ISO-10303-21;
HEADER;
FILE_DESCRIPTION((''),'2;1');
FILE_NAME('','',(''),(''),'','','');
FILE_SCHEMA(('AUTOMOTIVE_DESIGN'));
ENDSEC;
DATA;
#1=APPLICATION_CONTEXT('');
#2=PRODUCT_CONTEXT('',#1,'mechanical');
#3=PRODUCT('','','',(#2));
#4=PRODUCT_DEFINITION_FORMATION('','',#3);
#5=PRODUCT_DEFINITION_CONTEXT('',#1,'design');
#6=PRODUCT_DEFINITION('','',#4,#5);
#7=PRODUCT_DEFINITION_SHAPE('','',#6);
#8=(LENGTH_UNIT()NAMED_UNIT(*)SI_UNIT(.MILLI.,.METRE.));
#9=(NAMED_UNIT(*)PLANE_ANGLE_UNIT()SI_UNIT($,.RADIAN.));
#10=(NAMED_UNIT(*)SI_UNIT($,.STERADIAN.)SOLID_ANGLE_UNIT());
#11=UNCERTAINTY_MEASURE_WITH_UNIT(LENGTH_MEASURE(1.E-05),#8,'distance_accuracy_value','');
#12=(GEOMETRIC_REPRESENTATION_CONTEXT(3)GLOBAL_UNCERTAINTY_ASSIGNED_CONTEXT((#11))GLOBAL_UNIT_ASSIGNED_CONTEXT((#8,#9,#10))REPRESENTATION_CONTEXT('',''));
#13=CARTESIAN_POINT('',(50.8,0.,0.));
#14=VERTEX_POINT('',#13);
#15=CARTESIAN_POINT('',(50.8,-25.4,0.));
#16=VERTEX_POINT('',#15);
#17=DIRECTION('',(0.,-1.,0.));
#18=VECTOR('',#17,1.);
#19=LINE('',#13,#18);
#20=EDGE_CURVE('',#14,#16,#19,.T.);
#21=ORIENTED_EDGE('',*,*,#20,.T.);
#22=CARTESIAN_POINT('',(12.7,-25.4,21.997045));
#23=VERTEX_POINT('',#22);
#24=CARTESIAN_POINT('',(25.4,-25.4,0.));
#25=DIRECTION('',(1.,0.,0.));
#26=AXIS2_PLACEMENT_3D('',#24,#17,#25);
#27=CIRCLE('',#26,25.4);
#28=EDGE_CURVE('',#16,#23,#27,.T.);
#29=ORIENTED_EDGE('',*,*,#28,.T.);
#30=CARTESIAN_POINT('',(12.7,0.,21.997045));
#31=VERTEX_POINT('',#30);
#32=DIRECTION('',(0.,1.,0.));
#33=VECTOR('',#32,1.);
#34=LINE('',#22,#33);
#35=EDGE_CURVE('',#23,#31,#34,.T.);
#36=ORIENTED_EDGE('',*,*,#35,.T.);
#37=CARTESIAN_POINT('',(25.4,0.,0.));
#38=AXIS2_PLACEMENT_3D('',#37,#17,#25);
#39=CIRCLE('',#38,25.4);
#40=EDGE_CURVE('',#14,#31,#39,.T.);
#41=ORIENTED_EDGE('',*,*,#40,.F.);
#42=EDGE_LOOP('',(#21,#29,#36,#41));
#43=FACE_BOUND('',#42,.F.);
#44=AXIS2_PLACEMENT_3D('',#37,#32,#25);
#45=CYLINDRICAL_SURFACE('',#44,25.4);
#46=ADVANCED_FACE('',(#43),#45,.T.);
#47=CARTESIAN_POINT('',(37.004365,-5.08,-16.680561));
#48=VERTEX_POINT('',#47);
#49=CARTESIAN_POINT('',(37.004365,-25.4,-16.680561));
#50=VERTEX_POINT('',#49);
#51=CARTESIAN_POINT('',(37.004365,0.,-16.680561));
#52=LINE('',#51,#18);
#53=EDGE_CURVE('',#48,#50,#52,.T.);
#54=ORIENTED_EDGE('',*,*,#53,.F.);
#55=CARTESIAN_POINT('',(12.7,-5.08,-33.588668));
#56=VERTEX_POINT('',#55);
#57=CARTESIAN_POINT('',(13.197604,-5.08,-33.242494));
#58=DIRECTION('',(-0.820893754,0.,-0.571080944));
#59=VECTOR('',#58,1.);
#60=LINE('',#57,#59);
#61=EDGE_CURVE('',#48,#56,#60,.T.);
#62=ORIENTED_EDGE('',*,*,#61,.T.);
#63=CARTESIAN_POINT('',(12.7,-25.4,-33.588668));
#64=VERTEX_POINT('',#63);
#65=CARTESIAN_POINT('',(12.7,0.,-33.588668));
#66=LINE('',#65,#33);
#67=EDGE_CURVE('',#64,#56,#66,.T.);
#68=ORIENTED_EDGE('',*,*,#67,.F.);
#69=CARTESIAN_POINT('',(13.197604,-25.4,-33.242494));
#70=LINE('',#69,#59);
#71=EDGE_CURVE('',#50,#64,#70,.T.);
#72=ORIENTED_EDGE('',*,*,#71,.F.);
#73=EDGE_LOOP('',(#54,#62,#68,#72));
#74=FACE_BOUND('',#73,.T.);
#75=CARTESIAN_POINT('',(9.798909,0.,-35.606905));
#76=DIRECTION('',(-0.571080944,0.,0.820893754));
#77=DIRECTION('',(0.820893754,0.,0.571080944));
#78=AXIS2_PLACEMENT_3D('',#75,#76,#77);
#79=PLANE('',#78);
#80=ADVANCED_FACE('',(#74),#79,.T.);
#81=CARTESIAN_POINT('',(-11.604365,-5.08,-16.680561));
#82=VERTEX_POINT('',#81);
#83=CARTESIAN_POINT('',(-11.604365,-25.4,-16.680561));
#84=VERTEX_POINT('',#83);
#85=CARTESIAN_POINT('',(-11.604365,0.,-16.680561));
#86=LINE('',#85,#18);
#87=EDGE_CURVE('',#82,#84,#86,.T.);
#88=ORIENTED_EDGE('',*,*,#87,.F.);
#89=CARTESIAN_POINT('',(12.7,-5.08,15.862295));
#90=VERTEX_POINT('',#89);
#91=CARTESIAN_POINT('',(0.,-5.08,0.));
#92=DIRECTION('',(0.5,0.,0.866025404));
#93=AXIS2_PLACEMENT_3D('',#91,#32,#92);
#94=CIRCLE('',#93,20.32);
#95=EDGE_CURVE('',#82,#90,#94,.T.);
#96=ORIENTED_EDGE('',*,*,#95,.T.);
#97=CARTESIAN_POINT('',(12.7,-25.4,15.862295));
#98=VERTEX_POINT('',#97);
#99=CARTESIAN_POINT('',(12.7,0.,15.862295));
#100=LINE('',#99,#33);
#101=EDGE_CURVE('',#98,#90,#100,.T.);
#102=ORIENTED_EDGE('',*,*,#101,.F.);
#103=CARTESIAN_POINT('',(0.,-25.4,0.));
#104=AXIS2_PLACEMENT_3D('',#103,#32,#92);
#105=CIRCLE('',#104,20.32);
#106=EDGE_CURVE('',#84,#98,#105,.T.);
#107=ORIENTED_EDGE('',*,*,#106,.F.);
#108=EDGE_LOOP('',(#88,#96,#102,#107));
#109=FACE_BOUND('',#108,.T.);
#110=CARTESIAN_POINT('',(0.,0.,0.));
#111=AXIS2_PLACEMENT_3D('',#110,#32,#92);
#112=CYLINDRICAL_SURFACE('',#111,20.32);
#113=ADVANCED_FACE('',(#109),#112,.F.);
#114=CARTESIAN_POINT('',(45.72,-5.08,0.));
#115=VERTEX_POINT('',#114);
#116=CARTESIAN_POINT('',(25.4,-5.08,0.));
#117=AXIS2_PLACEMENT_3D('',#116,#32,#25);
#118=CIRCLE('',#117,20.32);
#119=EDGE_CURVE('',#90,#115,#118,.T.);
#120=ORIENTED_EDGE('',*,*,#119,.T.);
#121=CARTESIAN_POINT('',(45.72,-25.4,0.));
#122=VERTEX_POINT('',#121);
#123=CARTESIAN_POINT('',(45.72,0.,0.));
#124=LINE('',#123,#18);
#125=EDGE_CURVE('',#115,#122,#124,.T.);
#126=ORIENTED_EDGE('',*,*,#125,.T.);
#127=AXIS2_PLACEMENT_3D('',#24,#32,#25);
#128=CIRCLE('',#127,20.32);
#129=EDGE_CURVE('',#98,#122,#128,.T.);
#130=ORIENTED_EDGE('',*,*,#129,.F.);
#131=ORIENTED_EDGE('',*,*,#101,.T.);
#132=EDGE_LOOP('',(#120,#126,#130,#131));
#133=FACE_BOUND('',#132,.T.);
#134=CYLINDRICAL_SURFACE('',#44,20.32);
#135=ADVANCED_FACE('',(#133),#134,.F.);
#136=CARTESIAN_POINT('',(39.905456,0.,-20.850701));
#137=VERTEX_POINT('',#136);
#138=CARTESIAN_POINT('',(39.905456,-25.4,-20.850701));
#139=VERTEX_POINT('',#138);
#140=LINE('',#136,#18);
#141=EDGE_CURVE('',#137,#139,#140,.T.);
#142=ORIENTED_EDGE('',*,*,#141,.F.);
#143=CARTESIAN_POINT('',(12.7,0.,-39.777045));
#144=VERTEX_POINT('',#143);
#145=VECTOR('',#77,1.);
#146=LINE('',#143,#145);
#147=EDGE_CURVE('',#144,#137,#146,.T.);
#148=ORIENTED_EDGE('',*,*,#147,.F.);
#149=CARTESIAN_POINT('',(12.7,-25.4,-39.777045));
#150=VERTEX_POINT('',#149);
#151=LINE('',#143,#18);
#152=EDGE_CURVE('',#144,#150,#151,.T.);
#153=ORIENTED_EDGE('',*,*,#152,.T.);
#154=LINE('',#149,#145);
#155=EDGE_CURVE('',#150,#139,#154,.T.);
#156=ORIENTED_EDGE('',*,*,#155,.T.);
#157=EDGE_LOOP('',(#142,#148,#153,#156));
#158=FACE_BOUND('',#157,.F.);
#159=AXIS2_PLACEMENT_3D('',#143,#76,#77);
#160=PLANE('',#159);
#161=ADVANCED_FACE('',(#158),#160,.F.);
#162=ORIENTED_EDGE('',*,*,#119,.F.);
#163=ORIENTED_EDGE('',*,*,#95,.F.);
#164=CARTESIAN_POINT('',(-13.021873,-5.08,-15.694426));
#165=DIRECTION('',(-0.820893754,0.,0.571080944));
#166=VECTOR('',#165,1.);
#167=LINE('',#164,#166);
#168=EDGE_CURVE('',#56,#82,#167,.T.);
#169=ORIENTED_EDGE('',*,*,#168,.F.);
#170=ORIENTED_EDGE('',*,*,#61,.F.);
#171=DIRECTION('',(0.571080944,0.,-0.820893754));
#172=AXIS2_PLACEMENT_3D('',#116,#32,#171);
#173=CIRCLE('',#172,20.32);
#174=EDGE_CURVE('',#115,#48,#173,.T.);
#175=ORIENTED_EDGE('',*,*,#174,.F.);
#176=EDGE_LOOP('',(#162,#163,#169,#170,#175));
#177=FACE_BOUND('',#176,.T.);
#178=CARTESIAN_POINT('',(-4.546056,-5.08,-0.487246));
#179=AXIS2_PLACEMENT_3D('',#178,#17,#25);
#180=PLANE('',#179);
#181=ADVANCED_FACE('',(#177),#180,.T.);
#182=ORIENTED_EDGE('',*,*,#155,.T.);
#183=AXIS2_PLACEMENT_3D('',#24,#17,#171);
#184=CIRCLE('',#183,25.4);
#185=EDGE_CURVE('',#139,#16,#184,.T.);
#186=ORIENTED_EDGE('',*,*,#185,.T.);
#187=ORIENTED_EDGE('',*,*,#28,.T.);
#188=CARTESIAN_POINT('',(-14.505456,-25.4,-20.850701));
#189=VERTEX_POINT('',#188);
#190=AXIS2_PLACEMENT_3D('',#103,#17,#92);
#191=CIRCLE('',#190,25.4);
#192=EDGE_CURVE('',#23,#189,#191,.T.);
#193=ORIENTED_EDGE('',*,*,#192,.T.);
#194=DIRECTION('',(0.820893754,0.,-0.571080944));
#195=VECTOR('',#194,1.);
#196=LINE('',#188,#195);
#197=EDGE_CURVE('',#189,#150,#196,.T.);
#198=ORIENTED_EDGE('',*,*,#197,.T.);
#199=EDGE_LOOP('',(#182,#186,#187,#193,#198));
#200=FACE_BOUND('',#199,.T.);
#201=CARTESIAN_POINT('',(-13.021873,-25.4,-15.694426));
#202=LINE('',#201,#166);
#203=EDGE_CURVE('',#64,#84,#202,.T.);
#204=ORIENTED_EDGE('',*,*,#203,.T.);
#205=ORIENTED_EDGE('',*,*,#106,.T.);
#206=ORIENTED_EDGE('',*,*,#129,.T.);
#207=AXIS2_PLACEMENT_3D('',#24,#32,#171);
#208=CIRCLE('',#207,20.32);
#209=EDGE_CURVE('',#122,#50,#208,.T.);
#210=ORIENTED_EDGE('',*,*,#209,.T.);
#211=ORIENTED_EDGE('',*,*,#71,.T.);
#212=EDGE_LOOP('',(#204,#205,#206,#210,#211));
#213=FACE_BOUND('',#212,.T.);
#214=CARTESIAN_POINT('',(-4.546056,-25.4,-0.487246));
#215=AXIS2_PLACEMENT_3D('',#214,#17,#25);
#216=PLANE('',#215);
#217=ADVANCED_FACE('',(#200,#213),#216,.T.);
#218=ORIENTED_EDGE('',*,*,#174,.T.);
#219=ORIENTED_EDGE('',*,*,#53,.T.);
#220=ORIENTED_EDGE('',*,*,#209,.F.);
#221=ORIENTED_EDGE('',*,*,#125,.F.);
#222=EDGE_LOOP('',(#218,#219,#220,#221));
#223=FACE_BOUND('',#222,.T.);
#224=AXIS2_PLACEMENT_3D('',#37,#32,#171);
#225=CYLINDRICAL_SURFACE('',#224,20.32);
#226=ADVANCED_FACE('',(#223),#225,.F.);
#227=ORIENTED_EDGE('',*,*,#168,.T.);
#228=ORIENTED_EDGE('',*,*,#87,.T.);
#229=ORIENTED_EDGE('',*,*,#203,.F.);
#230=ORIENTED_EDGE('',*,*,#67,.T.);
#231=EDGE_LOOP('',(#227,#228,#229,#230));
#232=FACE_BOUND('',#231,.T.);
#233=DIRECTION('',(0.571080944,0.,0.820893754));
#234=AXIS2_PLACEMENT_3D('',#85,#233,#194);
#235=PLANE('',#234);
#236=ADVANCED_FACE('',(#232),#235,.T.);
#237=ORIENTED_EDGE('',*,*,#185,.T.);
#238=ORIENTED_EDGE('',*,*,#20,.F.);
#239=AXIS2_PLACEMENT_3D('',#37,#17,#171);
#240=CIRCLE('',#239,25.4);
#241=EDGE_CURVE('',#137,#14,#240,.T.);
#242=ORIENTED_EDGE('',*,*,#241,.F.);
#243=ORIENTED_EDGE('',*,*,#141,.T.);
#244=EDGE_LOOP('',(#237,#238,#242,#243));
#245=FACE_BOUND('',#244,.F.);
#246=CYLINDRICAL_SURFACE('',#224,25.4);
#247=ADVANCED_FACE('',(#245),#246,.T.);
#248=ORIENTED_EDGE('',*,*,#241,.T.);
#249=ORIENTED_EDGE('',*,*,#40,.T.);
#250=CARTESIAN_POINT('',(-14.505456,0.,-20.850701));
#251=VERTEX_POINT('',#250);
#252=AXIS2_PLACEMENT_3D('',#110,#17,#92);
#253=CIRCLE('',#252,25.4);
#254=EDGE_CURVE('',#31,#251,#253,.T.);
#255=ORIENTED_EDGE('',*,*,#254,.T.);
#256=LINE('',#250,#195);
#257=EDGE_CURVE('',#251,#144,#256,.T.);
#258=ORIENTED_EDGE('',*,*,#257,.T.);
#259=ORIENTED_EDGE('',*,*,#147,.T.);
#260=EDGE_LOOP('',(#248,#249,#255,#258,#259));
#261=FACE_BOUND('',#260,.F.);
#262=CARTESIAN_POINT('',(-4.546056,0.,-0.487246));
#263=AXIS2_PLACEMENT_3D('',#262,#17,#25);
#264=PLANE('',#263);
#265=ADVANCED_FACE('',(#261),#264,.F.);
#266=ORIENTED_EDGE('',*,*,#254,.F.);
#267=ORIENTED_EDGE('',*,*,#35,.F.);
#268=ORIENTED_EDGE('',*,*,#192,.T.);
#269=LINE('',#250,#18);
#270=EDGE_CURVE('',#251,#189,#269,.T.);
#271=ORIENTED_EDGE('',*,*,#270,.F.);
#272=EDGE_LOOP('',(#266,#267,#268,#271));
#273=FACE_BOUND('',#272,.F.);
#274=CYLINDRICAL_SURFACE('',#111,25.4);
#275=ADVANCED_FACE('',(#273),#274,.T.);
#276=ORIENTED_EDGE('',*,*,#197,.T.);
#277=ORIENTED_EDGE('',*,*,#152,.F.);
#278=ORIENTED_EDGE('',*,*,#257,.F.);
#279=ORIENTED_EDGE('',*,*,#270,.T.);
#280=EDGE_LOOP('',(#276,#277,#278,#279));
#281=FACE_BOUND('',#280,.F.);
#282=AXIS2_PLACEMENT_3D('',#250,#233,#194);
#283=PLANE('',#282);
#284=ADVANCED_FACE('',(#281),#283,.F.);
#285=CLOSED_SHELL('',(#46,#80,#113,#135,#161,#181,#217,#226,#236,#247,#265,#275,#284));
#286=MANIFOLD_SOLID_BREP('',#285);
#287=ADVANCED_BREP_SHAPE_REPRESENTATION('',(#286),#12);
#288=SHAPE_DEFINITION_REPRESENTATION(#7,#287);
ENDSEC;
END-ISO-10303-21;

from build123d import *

# Parameters (mm, degrees)
F1_DEPTH = 19.05
F2_DEPTH = 25.4
F3_T     = -5.08


# Not quite as in the source:
# - a feature names something its author has since deleted; it is built from what else it names


with BuildPart() as f1:
    # F0 (on Front) → F1 (new body)
    with BuildSketch(Plane.XZ):
        with BuildLine():
            ThreePointArc((12.7, 21.9970452561), (-21.4428837855, 13.6147983812), (-14.5054559874, -20.8507013455))
            ThreePointArc((-14.5054559874, -20.8507013455), (-1.0693193728, -25.3774812793), (12.7, -21.9970452561))
            ThreePointArc((12.7, -21.9970452561), (0, 0), (12.7, 21.9970452561))
        make_face()
    extrude(amount=F1_DEPTH)

    # F0 (on Front) → F2 (join)
    with BuildSketch(Plane.XZ):
        with BuildLine():
            ThreePointArc((12.7, 21.9970452561), (-21.4428837855, 13.6147983812), (-14.5054559874, -20.8507013455))
            ThreePointArc((-14.5054559874, -20.8507013455), (-1.0693193728, -25.3774812793), (12.7, -21.9970452561))
            ThreePointArc((12.7, -21.9970452561), (0, 0), (12.7, 21.9970452561))
        make_face()
        with BuildLine():
            ThreePointArc((12.7, -21.9970452561), (-1.0693193728, -25.3774812793), (-14.5054559874, -20.8507013455))
            Line((-14.5054559874, -20.8507013455), (12.7, -39.7770452561))
            Line((12.7, -39.7770452561), (12.7, -21.9970452561))
        make_face()
        with BuildLine():
            ThreePointArc((12.7, 21.9970452561), (0, 0), (12.7, -21.9970452561))
            ThreePointArc((12.7, -21.9970452561), (21.9970452561, -12.7), (25.4, 0))
            ThreePointArc((25.4, 0), (21.9970452561, 12.7), (12.7, 21.9970452561))
        make_face()
        with BuildLine():
            ThreePointArc((25.4, 0), (21.9970452561, -12.7), (12.7, -21.9970452561))
            ThreePointArc((12.7, -21.9970452561), (26.4693193728, -25.3774812793), (39.9054559874, -20.8507013455))
            ThreePointArc((39.9054559874, -20.8507013455), (47.9122031583, -11.762682898), (50.8, 0))
            ThreePointArc((50.8, 0), (38.1, 21.9970452561), (12.7, 21.9970452561))
            ThreePointArc((12.7, 21.9970452561), (21.9970452561, 12.7), (25.4, 0))
        make_face()
        with BuildLine():
            ThreePointArc((39.9054559874, -20.8507013455), (26.4693193728, -25.3774812793), (12.7, -21.9970452561))
            Line((12.7, -21.9970452561), (12.7, -39.7770452561))
            Line((12.7, -39.7770452561), (39.9054559874, -20.8507013455))
        make_face()
    extrude(amount=F2_DEPTH)

    # F3
    f3_openings = [f1.faces().sort_by_distance(p)[0] for p in [
        (12.7, -25.4, -2.767667),
    ]]
    offset(amount=F3_T, openings=f3_openings, kind=Kind.INTERSECTION)


solid = f1.part
